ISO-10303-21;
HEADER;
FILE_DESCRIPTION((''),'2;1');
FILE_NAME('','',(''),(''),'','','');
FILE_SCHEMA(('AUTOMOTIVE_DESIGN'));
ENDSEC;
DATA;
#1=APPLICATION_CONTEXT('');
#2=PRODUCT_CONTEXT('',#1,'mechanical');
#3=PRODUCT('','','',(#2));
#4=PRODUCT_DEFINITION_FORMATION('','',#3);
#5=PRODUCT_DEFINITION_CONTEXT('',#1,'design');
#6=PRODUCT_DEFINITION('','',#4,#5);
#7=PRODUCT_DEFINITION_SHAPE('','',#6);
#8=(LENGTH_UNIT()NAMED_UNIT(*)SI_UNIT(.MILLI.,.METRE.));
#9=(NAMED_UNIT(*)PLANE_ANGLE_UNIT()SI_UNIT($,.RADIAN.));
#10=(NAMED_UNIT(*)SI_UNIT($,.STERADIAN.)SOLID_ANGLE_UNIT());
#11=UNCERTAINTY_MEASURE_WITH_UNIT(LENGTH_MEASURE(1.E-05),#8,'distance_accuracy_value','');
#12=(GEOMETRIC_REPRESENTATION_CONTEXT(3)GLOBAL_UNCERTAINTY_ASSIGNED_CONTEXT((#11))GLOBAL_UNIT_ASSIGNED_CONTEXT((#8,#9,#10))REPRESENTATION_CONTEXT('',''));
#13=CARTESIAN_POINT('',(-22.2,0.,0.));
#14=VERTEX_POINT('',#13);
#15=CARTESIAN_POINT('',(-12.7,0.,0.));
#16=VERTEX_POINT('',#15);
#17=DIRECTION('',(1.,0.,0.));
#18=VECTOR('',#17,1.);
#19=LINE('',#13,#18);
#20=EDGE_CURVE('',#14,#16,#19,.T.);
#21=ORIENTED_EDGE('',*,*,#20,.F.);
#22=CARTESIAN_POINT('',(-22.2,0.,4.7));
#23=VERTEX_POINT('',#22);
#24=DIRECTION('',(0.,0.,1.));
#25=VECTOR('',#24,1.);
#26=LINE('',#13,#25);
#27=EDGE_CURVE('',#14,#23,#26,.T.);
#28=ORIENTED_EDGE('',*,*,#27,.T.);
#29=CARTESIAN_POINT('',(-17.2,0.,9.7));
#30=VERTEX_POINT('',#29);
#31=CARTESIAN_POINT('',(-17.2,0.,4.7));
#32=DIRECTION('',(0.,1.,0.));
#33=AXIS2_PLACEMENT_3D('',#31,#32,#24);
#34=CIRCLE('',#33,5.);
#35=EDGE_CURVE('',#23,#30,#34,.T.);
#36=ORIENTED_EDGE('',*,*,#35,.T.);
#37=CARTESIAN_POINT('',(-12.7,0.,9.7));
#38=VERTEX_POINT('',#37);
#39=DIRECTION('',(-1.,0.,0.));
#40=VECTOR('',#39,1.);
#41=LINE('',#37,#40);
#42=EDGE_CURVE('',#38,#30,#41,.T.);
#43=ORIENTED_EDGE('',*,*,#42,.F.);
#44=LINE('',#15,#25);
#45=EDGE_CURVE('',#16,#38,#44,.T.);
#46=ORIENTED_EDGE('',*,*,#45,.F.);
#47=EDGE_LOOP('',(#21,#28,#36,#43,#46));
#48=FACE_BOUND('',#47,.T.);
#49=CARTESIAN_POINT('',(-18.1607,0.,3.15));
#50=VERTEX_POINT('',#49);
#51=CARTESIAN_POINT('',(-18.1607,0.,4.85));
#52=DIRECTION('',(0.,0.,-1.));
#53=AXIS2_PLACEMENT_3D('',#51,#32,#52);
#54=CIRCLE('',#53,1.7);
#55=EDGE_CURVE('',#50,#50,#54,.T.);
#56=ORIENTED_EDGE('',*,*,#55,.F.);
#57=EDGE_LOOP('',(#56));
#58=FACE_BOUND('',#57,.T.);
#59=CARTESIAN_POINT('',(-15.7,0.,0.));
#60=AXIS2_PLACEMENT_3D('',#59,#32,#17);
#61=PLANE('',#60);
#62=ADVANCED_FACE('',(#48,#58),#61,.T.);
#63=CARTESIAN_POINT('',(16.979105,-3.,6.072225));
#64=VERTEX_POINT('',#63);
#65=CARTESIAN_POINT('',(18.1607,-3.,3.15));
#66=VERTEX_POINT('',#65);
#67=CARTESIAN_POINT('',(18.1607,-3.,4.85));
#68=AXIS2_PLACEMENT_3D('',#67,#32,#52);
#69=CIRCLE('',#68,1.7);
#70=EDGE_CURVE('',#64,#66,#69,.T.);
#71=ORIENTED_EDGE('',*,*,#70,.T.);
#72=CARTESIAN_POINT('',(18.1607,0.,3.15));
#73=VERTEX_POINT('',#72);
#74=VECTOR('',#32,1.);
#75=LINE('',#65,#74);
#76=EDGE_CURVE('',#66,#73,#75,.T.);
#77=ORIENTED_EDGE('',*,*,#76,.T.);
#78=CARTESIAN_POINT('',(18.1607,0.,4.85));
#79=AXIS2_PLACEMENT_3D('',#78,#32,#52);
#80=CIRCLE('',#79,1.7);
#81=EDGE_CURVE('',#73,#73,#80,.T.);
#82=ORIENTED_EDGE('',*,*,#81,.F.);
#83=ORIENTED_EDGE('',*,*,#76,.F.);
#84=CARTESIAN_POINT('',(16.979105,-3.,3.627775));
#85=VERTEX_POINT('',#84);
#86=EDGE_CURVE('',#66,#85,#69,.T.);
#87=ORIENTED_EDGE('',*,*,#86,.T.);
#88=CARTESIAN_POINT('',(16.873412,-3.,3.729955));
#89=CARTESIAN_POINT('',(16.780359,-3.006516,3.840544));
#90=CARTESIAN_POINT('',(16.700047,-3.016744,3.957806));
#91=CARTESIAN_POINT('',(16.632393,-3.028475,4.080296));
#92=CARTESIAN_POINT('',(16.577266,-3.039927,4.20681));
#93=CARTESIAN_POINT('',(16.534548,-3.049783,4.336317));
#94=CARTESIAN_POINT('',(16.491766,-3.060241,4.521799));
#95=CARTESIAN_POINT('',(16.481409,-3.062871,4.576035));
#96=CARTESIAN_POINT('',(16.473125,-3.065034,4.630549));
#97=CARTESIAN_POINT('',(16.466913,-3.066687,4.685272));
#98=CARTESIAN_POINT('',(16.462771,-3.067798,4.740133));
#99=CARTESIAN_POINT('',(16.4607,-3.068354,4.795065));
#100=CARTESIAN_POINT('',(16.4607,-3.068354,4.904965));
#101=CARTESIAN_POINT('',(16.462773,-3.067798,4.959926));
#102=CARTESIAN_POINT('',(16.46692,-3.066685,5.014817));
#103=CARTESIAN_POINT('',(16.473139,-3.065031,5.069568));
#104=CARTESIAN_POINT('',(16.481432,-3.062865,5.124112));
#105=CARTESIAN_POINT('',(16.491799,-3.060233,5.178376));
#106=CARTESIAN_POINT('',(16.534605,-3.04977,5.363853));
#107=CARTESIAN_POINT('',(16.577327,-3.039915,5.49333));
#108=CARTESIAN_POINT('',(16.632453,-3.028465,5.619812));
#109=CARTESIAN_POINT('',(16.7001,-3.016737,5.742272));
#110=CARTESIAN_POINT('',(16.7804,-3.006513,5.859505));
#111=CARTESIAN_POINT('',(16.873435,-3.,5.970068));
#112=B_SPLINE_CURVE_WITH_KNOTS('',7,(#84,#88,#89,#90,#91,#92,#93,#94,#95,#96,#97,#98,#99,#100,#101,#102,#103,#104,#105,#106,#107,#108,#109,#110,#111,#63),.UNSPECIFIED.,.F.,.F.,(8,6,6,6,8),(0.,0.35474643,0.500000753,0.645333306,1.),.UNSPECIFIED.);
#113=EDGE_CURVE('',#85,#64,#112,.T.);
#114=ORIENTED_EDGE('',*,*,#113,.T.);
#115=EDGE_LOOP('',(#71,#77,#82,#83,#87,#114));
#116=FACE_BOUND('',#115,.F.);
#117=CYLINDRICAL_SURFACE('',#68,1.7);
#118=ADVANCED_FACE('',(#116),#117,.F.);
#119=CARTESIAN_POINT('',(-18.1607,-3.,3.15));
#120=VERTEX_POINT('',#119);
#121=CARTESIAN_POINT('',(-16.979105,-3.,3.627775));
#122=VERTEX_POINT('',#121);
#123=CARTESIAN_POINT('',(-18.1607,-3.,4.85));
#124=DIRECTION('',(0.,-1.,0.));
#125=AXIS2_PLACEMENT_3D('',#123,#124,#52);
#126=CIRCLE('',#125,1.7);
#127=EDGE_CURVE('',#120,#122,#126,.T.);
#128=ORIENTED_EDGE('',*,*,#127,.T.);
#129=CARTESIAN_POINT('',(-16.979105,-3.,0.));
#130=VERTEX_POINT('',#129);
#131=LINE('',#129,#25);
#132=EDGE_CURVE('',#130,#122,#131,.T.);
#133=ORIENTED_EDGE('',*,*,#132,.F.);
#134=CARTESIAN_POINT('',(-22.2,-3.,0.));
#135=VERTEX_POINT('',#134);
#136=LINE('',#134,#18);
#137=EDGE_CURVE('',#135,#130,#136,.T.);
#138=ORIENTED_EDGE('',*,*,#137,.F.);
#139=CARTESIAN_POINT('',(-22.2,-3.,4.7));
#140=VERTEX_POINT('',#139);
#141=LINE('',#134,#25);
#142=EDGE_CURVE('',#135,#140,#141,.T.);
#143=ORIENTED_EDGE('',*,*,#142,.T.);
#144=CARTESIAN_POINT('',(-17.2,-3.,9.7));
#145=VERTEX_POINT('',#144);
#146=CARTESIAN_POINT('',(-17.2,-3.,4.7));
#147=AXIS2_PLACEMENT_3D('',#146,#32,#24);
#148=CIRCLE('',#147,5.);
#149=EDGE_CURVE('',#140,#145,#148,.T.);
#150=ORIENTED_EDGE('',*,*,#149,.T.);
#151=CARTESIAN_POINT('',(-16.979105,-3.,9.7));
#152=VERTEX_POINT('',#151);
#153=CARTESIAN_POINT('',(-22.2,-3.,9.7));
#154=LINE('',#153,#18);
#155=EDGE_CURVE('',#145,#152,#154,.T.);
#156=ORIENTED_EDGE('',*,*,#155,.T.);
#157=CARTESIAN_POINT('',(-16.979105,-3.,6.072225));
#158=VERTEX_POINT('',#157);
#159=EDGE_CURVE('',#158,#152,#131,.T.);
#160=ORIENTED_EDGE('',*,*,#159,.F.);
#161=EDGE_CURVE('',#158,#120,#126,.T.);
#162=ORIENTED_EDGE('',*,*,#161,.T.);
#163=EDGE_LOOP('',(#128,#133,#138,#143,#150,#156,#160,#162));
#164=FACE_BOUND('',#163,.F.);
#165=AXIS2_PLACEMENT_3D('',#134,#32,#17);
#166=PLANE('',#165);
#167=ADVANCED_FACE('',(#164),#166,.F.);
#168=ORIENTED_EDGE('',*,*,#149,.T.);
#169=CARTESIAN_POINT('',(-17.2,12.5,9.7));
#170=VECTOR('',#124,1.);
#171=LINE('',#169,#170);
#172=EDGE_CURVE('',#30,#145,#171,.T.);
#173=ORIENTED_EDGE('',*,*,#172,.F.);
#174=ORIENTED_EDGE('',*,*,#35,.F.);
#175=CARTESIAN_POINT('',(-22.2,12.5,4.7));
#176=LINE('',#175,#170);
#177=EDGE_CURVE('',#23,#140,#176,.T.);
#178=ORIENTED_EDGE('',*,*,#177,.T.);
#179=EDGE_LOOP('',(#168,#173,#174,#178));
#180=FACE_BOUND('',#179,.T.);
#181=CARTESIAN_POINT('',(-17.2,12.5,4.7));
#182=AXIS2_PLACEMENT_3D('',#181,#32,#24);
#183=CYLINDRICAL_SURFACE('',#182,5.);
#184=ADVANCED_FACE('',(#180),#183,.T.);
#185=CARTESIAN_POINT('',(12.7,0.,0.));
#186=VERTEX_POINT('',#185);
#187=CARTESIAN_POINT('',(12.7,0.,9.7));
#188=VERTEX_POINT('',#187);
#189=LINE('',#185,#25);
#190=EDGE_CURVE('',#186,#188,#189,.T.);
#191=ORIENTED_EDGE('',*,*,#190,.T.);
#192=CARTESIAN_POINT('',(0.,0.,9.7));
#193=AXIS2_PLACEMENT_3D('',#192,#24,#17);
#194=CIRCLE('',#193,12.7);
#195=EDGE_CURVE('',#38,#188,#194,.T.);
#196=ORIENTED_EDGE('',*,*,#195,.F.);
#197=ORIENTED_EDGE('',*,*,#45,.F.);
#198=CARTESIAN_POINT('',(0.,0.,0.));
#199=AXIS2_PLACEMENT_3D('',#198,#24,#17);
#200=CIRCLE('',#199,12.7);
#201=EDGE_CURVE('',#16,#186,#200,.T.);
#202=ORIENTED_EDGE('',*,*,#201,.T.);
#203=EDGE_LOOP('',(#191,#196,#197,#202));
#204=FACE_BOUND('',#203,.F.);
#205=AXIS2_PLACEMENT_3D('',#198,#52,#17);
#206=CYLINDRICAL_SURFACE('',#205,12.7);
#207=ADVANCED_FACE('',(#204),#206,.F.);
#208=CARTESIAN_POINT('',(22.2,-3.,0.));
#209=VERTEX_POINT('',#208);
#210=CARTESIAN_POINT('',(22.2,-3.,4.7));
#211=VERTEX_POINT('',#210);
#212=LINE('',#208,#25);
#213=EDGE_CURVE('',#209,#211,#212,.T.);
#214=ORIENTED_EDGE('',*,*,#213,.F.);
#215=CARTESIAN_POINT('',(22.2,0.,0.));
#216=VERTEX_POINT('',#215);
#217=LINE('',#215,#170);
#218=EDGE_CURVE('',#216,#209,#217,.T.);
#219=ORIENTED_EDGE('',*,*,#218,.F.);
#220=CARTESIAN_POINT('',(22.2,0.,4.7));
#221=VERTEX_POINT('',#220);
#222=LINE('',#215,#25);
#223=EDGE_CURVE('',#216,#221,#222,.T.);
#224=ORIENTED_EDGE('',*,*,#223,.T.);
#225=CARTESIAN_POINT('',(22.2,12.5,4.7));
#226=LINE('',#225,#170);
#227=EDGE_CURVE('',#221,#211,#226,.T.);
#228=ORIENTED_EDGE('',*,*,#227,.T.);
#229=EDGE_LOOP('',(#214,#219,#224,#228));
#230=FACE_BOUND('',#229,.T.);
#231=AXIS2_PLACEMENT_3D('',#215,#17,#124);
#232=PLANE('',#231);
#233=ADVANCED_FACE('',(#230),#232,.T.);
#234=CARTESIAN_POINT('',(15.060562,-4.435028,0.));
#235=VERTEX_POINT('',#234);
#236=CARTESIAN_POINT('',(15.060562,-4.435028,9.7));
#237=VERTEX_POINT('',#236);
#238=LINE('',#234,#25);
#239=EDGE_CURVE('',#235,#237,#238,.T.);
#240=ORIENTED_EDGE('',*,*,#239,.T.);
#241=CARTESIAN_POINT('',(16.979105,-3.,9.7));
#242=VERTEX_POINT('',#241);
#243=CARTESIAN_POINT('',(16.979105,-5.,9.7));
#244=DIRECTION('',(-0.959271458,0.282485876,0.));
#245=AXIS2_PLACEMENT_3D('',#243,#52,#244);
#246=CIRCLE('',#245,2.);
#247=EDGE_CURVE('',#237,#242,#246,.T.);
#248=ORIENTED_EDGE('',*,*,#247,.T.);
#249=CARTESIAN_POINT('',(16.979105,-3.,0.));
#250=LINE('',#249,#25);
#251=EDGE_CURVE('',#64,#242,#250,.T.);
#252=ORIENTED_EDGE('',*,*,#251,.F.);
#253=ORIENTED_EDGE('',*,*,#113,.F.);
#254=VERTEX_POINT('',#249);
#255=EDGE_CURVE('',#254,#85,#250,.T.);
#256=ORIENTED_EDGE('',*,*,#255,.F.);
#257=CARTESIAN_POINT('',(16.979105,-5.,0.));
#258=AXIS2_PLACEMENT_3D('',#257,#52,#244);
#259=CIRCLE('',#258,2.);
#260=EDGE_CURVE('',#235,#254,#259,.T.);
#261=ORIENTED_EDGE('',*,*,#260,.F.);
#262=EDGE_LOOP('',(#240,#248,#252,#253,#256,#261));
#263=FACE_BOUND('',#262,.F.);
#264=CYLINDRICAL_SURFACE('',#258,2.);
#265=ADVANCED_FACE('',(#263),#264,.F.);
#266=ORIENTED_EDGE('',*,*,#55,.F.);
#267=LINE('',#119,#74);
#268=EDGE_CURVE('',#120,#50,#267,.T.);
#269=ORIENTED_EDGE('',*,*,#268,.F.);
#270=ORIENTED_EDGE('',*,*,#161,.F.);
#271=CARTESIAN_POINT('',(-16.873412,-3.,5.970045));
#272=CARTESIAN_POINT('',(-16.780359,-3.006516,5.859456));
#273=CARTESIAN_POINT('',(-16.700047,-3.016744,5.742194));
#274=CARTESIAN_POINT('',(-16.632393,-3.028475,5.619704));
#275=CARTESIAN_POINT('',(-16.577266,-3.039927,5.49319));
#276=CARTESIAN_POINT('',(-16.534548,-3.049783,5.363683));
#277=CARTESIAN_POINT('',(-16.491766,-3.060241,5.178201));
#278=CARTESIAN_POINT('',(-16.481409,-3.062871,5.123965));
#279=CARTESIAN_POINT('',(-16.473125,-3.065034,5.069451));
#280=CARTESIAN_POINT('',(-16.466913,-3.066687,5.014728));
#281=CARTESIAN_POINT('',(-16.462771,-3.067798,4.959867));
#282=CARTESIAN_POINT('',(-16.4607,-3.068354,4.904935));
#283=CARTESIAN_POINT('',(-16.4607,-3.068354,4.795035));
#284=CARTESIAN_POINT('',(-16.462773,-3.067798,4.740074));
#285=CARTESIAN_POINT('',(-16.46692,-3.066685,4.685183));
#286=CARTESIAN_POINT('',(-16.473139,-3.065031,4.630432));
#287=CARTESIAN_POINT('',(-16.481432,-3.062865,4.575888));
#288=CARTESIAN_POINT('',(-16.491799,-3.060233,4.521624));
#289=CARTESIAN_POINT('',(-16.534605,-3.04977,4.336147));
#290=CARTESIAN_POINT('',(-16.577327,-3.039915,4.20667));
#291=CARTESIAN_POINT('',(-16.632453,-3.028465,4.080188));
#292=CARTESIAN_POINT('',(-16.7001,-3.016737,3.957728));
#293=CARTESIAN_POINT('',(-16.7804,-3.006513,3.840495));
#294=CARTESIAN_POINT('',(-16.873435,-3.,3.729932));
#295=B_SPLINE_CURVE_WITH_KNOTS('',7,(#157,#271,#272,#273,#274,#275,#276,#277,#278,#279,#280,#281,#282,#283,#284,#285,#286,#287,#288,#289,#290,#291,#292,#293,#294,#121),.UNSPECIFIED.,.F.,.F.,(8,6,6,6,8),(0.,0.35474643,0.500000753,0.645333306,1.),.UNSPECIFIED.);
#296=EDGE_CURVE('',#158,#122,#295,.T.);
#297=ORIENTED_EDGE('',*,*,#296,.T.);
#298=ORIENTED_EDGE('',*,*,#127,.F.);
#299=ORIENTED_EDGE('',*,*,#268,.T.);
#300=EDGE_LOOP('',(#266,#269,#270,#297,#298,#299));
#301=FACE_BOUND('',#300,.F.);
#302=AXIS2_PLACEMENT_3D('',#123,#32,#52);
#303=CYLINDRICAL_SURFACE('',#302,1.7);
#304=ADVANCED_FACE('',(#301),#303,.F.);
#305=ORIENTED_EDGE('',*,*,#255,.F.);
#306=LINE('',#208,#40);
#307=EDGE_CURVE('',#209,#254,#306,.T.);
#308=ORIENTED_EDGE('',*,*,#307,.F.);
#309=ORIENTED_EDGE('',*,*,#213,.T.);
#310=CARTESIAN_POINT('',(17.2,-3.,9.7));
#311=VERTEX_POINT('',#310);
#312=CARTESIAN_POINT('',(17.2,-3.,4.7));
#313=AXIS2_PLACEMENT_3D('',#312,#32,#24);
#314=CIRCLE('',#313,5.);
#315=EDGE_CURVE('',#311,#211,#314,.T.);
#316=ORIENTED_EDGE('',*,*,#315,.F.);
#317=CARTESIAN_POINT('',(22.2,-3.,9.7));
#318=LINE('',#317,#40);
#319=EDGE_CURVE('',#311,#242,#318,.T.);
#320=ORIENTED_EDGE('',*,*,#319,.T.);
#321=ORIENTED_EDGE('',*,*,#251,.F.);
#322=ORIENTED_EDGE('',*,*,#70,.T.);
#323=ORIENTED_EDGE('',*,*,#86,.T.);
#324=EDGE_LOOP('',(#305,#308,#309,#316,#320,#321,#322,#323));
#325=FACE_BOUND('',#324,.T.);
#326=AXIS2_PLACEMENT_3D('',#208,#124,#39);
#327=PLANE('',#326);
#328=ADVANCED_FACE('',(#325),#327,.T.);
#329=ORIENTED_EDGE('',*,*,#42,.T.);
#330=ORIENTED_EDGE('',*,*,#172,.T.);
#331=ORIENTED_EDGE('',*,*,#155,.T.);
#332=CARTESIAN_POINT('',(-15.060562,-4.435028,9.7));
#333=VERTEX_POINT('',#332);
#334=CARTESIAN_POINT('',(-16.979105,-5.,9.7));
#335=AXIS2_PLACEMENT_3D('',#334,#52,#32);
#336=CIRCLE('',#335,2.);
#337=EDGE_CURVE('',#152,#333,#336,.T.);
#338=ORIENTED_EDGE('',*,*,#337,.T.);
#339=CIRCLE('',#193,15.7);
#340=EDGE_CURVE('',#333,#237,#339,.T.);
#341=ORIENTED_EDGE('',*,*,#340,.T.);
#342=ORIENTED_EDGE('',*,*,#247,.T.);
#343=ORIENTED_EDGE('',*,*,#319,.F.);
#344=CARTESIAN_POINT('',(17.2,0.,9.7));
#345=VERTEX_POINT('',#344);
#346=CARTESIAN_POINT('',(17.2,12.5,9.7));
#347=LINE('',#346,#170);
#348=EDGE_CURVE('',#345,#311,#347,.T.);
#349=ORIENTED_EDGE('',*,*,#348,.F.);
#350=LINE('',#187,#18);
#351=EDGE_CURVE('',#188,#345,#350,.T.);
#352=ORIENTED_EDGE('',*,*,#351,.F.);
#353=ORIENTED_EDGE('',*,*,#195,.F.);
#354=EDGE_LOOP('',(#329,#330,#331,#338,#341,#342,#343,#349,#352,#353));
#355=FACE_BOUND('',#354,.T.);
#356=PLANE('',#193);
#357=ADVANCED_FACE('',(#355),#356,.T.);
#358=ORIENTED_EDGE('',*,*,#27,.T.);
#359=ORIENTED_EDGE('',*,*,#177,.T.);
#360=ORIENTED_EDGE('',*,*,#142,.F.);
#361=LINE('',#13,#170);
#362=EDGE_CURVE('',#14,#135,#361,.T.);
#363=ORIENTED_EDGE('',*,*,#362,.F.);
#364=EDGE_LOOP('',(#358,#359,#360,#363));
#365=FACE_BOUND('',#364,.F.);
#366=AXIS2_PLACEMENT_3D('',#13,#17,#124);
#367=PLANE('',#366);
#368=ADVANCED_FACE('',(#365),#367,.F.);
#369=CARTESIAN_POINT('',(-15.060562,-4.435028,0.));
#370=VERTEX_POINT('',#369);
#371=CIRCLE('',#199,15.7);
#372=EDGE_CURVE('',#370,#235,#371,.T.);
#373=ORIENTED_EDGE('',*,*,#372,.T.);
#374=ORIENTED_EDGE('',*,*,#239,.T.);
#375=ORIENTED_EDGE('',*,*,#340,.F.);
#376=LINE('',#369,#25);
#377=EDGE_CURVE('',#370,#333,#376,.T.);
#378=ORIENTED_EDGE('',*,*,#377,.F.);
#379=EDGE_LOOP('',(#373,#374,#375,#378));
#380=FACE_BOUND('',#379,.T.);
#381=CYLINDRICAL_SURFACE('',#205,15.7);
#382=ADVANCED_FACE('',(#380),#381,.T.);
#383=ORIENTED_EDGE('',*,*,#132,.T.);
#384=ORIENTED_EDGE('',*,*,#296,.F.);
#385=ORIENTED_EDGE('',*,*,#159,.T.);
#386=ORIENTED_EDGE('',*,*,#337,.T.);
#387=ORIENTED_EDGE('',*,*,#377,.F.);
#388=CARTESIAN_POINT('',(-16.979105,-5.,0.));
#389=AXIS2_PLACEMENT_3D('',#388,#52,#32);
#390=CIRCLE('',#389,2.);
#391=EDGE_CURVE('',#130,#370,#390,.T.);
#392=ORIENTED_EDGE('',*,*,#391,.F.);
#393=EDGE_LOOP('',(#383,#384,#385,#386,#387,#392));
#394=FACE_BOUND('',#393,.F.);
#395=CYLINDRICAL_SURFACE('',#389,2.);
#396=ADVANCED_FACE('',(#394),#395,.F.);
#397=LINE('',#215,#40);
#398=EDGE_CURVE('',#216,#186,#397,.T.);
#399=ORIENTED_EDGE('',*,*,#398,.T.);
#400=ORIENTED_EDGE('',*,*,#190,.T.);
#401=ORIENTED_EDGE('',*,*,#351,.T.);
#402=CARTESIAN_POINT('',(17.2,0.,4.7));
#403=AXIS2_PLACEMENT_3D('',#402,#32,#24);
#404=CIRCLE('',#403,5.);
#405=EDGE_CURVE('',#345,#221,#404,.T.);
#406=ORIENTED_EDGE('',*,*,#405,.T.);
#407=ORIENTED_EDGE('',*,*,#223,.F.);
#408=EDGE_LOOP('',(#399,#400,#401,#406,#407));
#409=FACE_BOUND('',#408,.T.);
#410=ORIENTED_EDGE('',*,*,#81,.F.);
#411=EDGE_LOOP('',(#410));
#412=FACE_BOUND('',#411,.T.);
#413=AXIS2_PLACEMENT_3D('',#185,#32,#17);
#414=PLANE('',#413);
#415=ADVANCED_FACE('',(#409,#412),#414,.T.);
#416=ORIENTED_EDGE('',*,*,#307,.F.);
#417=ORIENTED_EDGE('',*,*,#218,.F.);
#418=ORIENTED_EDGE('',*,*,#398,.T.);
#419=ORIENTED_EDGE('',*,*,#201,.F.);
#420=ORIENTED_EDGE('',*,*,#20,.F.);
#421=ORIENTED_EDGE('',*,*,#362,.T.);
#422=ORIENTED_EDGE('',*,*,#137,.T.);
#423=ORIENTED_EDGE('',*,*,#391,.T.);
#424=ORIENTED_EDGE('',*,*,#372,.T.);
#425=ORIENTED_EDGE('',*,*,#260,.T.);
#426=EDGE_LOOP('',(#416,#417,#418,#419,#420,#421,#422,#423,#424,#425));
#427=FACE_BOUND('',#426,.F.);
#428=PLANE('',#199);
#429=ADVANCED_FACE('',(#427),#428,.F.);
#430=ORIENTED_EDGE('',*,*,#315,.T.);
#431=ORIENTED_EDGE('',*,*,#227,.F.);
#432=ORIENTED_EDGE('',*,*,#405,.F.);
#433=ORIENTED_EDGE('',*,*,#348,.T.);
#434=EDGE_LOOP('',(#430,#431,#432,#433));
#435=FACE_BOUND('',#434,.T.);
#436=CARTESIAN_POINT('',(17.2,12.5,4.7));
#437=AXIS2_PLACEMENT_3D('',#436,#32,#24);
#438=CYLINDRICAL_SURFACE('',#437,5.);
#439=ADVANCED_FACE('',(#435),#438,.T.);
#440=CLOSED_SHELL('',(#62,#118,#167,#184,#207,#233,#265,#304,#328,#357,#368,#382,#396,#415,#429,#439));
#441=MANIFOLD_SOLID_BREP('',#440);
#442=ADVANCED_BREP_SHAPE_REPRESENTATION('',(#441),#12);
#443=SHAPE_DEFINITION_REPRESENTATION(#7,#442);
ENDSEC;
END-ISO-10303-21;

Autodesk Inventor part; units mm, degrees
ref_plane "YZ Plane" through (0, 0, 0) normal (1, 0, 0) x (0, 1, 0)
ref_plane "XZ Plane" through (0, 0, 0) normal (0, 1, 0) x (-1, 0, 0)
ref_plane "XY Plane" through (0, 0, 0) normal (0, 0, 1) x (1, 0, 0)
sketch "Sketch1" plane through (0, 0, 0) normal (0, 0, 1) x (1, 0, 0)
  line L0 (12.7, 0) -> (22.2, 0)
  line L1 (22.2, 0) -> (22.2, -3)
  line L2 (22.2, -3) -> (12.7, -3)
  line L3 (12.7, -3) -> (12.7, 0)
  circle A0 centre (0, 0) radius 12.7
  circle A1 centre (0, 0) radius 15.7
  line L4 (-15.7, 0) -> (-12.7, 0)
  line L5 (12.7, 0) -> (15.7, 0)
  line L6 (-12.7, 0) -> (-22.2, 0)
  line L7 (-22.2, 0) -> (-22.2, -3)
  line L8 (-22.2, -3) -> (-12.7, -3)
  line L9 (-12.7, -3) -> (-12.7, 0)
  dimension "d0" = 12.7
  dimension "d1" = 3
  dimension "d2" = 3
  dimension "d3" = 6.5
extrude "Extrusion1" add sketch "Sketch1" along normal blind 9.7 contours L0 A1 L2 L3 | L3 L2 A1 L8 L9 A0 | L0 L1 L2 A1 | L9 L8 A1 L4 | A1 L8 L7 L6
sketch "Sketch2" plane through (15.4107, -3, 0) normal (0, -1, 0) x (1, 0, 0)
  line L0 (0, 9.7) -> (0, 0) projected
  line L1 (0, 4.85) -> (2.75, 4.85)
  circle A0 centre (2.75, 4.85) radius 2.75
  point P0 (-15.4107, 0)
  dimension "d6" = 5.5
hole "Hole1" at (18.1607, -3, 4.85) direction (0, 1, 0) diameter 3.4 end through all
ref_plane "Work Plane1" through (0, -3, 0) normal (1, 0, 0) x (0, 0, -1)
mirror "Mirror1" about plane through (0, -3, 0) normal (1, 0, 0) of "Hole1"
fillet "Fillet1" radius 5 2 edges at (-22.2, -1.5, 9.7) (22.2, -1.5, 9.7)
fillet "Fillet1" radius 2 2 edges at (15.4107, -3, 4.85) (-15.4107, -3, 4.85)
properties part number "bottom_fitting"
